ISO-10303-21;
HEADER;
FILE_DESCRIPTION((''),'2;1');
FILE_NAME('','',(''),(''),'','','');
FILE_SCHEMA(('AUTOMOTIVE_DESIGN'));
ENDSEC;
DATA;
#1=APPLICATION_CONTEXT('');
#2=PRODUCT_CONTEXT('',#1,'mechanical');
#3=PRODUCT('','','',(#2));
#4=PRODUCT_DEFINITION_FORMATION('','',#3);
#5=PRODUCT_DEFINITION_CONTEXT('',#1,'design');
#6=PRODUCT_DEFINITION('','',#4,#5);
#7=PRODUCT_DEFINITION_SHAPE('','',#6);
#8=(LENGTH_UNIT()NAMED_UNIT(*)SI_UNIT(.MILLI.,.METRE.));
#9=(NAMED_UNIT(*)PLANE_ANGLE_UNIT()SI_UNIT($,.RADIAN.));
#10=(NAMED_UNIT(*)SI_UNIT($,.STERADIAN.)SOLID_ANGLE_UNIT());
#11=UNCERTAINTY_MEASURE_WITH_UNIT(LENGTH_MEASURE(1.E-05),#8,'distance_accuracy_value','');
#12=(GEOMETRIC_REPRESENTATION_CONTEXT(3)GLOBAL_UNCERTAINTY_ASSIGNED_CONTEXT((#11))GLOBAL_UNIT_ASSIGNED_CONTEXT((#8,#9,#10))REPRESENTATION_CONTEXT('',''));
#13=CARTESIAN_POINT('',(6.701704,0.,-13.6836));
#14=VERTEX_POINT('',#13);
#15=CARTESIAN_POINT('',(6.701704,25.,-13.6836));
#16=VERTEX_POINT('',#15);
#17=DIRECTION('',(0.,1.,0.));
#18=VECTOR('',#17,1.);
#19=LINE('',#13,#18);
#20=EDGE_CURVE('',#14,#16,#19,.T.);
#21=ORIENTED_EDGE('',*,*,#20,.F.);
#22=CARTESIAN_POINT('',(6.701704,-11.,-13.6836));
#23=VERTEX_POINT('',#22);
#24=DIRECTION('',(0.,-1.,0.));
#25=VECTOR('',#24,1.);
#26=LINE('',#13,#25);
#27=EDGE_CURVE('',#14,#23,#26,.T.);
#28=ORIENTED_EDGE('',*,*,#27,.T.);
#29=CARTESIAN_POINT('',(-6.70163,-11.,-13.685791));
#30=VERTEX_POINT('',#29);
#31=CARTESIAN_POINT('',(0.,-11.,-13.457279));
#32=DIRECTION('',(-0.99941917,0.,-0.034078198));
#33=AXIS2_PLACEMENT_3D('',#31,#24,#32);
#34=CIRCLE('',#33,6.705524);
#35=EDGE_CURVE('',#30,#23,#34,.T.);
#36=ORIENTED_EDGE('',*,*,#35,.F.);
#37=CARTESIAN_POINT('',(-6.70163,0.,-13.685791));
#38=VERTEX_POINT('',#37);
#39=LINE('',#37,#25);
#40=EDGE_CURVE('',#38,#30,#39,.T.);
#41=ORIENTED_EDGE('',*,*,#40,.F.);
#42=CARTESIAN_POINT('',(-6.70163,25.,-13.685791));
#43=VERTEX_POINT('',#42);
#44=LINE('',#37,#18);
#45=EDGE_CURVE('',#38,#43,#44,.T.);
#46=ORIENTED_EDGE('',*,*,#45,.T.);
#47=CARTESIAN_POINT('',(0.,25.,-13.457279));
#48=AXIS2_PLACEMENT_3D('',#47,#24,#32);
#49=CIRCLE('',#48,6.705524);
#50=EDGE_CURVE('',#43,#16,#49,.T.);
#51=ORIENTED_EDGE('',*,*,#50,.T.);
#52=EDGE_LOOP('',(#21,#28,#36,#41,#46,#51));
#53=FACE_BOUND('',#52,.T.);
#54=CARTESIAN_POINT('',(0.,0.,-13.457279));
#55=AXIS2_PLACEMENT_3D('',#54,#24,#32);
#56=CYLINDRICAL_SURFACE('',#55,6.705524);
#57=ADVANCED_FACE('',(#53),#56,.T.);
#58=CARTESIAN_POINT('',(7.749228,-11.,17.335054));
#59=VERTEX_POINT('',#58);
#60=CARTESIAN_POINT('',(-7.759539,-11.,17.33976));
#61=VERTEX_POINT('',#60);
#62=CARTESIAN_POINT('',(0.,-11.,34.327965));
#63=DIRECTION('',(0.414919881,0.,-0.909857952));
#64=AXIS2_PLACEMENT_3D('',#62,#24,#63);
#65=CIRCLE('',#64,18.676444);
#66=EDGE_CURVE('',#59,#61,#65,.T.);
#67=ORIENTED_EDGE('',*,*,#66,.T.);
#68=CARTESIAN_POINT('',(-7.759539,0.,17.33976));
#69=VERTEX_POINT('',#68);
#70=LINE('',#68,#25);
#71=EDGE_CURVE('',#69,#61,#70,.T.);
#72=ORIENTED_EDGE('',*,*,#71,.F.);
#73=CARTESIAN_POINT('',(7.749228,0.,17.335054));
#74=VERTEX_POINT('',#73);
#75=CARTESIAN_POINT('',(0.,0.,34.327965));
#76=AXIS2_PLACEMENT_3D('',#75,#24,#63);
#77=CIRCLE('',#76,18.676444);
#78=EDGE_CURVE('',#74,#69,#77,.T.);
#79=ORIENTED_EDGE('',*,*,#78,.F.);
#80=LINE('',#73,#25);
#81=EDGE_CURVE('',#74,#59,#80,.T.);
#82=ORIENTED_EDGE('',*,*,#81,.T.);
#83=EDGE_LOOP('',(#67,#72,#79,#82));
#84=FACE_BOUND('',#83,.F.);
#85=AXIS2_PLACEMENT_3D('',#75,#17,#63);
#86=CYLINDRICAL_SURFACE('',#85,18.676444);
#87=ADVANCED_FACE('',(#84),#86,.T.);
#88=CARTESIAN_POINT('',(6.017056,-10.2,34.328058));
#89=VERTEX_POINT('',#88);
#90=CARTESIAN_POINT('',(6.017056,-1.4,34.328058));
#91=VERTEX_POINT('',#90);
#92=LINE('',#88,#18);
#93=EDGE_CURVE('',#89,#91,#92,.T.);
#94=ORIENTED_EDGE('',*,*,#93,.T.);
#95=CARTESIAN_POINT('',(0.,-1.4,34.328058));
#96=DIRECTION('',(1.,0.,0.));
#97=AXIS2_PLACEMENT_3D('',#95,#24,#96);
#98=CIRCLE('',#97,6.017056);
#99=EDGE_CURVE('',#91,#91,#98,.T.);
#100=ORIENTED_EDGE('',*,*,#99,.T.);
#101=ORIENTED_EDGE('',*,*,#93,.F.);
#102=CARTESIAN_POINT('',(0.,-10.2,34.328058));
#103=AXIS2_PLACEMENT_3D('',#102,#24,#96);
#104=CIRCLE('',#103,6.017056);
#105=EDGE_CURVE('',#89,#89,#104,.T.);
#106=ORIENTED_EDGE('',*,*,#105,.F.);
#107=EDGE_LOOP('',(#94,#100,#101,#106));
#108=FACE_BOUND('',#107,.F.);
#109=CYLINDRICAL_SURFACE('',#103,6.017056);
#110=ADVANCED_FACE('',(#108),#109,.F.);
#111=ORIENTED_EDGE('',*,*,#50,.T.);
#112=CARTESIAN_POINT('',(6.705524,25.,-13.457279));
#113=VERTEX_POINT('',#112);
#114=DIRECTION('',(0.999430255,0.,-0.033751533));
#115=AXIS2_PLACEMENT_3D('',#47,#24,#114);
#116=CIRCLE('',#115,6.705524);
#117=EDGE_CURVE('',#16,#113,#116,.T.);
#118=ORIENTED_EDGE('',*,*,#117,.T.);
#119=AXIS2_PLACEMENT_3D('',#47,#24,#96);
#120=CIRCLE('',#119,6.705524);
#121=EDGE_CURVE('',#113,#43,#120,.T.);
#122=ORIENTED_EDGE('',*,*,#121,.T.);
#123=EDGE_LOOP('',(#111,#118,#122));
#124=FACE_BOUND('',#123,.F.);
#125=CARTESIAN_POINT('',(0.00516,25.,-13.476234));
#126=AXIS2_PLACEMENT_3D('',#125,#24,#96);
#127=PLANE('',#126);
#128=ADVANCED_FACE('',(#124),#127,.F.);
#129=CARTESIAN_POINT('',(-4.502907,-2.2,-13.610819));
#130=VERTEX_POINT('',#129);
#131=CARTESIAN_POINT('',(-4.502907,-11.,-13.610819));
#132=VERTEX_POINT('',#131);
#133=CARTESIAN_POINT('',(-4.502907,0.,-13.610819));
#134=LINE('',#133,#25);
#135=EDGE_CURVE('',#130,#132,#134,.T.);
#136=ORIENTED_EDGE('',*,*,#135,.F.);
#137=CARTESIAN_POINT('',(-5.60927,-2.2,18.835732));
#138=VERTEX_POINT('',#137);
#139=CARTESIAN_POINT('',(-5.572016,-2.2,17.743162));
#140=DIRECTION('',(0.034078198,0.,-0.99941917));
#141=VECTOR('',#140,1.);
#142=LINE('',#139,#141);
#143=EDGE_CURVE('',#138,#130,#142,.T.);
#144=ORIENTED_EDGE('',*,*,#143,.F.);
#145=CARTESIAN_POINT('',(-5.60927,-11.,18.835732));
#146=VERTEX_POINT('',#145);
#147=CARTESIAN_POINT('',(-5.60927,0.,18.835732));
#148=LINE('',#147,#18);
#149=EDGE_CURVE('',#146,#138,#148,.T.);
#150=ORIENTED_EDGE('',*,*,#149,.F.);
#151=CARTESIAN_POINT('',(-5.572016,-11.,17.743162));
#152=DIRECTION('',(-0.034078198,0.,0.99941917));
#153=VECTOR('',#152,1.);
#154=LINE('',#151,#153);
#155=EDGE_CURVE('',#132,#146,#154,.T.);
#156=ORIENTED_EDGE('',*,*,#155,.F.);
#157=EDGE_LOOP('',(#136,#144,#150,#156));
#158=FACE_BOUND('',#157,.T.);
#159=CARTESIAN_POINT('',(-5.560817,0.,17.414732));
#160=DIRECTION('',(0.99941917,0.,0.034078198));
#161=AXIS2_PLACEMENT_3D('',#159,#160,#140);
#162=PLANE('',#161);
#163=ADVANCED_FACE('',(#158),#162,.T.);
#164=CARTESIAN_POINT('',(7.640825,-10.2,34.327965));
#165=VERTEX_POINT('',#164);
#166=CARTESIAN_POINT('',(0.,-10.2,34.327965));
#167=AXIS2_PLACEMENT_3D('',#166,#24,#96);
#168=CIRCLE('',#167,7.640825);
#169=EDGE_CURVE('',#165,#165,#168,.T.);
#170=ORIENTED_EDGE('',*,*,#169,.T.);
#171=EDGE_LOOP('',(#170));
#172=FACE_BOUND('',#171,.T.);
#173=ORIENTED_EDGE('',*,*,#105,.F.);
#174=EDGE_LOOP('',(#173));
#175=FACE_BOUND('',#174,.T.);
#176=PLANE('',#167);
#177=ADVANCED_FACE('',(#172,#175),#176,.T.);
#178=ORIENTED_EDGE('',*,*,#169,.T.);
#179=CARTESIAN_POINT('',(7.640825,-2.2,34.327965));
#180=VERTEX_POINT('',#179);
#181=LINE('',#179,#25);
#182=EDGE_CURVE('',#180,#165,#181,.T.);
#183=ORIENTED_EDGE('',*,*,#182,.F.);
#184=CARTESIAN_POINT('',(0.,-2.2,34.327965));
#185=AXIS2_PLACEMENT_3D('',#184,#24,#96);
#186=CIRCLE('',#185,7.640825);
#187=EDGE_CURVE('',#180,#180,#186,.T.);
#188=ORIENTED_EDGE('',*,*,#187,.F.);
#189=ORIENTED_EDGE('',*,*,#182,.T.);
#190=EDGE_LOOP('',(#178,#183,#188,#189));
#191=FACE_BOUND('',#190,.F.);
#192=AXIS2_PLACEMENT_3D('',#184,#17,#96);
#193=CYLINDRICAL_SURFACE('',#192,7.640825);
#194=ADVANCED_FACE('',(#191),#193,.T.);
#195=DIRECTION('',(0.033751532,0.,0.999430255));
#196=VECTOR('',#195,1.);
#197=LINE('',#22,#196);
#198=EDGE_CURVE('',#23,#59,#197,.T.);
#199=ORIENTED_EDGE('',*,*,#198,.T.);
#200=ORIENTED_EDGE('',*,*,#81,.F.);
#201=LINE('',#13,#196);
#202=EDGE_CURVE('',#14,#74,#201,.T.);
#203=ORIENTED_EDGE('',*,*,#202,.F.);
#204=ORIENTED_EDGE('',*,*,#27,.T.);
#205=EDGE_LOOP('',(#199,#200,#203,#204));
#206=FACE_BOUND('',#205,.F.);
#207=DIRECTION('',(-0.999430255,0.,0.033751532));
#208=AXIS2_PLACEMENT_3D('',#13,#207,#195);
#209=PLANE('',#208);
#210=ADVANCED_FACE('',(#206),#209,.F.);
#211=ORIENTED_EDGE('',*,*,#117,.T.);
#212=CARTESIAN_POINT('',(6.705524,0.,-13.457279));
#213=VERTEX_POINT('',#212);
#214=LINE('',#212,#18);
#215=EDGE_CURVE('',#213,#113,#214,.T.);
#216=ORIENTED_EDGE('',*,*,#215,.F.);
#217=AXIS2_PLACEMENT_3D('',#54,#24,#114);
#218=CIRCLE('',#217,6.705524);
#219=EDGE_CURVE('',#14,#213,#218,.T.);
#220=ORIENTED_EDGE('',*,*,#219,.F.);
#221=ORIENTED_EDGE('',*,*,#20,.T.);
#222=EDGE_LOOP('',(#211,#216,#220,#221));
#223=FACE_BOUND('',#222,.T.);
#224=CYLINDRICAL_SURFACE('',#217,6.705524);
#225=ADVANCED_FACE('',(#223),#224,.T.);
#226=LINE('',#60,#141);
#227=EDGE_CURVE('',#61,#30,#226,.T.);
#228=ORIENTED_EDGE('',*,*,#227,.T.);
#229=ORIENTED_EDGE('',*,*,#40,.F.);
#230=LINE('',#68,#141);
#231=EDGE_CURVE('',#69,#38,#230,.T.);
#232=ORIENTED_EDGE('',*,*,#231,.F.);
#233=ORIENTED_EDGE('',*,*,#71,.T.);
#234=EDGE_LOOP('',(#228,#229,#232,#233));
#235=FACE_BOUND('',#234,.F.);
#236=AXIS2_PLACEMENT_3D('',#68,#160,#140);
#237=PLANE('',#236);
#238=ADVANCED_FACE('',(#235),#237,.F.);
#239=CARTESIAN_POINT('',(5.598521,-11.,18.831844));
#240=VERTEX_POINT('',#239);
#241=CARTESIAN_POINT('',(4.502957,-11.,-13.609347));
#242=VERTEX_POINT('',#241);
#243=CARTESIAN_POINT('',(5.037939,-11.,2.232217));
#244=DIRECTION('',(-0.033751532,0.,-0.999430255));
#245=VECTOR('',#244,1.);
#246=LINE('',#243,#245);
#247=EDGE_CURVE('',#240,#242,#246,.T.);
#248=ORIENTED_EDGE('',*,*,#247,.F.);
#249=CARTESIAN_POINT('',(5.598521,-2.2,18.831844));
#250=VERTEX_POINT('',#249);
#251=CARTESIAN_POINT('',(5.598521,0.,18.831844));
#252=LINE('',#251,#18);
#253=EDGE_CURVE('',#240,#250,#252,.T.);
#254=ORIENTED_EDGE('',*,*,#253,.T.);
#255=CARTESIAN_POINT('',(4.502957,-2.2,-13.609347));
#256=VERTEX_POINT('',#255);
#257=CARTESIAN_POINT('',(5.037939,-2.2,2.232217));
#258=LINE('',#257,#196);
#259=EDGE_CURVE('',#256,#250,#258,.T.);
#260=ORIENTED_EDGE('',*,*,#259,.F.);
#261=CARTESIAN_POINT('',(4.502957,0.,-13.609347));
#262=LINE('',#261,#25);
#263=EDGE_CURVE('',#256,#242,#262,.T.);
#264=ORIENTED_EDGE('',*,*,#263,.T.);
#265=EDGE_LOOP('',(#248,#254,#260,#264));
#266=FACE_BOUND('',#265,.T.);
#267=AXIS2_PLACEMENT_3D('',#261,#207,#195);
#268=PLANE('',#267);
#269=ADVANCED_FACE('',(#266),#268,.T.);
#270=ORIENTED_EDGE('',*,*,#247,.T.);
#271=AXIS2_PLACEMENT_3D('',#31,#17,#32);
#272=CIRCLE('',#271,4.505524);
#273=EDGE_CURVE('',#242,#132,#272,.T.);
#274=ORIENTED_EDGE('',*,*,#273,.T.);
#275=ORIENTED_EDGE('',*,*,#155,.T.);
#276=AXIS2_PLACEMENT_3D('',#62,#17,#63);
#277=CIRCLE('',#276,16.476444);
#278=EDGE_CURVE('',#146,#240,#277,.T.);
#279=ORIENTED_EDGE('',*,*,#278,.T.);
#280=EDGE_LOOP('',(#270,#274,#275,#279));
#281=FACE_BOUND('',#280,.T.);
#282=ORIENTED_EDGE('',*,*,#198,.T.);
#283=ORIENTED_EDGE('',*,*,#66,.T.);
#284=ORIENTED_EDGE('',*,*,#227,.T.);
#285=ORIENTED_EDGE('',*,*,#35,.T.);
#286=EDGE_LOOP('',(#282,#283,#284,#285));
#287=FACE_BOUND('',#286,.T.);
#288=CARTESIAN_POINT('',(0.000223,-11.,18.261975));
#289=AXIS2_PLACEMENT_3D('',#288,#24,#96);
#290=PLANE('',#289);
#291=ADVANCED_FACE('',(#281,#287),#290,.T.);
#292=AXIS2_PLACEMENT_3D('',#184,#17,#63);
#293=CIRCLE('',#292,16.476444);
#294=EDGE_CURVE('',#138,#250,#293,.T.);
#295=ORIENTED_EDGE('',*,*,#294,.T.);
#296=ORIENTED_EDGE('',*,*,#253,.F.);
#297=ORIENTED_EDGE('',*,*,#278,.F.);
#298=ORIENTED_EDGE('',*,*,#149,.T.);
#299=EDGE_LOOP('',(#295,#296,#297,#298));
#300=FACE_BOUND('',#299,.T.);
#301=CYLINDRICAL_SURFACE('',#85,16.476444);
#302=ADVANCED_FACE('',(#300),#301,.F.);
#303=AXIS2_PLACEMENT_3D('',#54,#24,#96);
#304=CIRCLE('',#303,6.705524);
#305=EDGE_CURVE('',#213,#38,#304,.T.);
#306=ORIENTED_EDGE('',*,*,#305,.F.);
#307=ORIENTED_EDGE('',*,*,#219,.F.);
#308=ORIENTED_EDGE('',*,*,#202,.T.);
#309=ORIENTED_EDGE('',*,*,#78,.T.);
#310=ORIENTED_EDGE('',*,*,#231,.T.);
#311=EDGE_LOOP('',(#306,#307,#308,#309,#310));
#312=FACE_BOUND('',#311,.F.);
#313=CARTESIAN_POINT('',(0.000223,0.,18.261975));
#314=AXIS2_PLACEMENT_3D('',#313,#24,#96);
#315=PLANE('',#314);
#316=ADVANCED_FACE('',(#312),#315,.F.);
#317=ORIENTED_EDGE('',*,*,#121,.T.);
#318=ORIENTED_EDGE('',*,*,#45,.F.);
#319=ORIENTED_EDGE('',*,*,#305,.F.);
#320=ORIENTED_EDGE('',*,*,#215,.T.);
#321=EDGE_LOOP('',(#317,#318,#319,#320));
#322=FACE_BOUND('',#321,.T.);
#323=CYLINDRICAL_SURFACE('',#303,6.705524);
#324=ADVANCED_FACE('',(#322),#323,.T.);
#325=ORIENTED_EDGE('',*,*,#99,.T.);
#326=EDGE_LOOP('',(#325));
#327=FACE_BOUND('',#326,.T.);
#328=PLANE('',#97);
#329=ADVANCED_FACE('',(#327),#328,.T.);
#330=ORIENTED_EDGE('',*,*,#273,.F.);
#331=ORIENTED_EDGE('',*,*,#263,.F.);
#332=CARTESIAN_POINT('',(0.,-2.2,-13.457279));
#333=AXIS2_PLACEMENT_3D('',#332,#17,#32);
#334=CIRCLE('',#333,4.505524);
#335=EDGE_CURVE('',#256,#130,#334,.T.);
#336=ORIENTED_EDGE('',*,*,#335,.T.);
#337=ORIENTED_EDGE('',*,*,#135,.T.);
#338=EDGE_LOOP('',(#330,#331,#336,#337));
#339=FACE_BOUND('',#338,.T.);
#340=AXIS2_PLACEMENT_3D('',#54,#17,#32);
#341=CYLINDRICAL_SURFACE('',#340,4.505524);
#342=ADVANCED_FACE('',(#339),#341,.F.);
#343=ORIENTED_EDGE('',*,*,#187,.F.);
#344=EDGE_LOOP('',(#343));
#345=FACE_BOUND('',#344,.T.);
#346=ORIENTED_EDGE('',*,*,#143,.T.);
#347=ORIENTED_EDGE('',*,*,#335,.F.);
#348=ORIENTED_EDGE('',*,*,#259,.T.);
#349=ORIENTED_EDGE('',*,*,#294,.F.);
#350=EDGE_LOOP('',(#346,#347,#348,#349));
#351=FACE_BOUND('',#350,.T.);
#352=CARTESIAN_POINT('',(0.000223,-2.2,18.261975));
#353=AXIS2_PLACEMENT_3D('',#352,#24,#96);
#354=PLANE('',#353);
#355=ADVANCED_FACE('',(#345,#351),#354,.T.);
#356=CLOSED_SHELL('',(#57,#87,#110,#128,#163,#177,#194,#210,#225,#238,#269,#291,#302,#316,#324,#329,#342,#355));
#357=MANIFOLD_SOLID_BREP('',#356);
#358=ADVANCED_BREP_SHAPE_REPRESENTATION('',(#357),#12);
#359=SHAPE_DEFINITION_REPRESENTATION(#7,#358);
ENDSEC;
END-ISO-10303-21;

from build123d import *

# Parameters (mm, degrees)
F0_R     = 5.0192291216
F1_DEPTH = 11
F2_T     = -2.2
F3_R     = 7.6408252188
F4_DEPTH = 8
F5_R     = 6.0170563026
F6_DEPTH = 8.8
F7_DEPTH = 25


# Not quite as in the source:
# - a feature names something its author has since deleted; it is built from what else it names


with BuildPart() as f1:
    # F0 (on Front) → F1 (new body)
    with BuildSketch(Plane.XZ):
        with BuildLine():
            Line((6.7017039213, -13.6836004417), (7.7492278625, 17.3350542571))
            ThreePointArc((7.7492278625, 17.3350542571), (0.0056670875, 53.0044082442), (-7.7595389242, 17.3397601606))
            Line((-7.7595389242, 17.3397601606), (-6.7016295892, -13.6857909072))
            ThreePointArc((-6.7016295892, -13.6857909072), (-0.1142726876, -6.7527281229), (6.7055243621, -13.457278721))
            ThreePointArc((6.7055243621, -13.457278721), (6.7045691839, -13.570455703), (6.7017039213, -13.6836004417))
        make_face()
        with Locations((0, 34.3279652297)):
            Circle(F0_R, mode=Mode.SUBTRACT)
        with BuildLine():
            ThreePointArc((8.3308181793, 34.5567601339), (8.3292111279, 34.0466813329), (8.2964022532, 33.5376562417))
            Line((8.2964022532, 33.5376562417), (8.3308181793, 34.5567601339))
        make_face(mode=Mode.SUBTRACT)
        with BuildLine():
            ThreePointArc((-6.7016295892, -13.6857909072), (0.0010958632, -20.1628029936), (6.7017039213, -13.6836004417))
            ThreePointArc((6.7017039213, -13.6836004417), (6.7045691839, -13.570455703), (6.7055243621, -13.457278721))
            ThreePointArc((6.7055243621, -13.457278721), (-0.1142726876, -6.7527281229), (-6.7016295892, -13.6857909072))
        make_face()
        with BuildLine():
            Line((8.3308181793, 34.5567601339), (8.2964022532, 33.5376562417))
            ThreePointArc((8.2964022532, 33.5376562417), (8.3292111279, 34.0466813329), (8.3308181793, 34.5567601339))
        make_face()
        with Locations((0, 34.3279652297)):
            Circle(F0_R)
    extrude(amount=F1_DEPTH)

    # F2
    f2_openings = [f1.faces().sort_by_distance(p)[0] for p in [
        (-0.000731, -11, 23.334865),
    ]]
    offset(amount=F2_T, openings=f2_openings, kind=Kind.INTERSECTION)

    # F3 (on face) → F4 (join)
    with BuildSketch(Plane.XZ.offset(2.2)):
        with Locations((0, 34.3279652297)):
            Circle(F3_R)
    extrude(amount=F4_DEPTH)

    # F5 (on face) → F6 (cut)
    with BuildSketch(Plane.XZ.offset(10.2)):
        with Locations((0, 34.328058362)):
            Circle(F5_R)
    extrude(amount=-F6_DEPTH, mode=Mode.SUBTRACT)

    # F0 (on Front) → F7 (join)
    with BuildSketch(Plane.XZ):
        with BuildLine():
            ThreePointArc((-6.7016295892, -13.6857909072), (0.0010958632, -20.1628029936), (6.7017039213, -13.6836004417))
            ThreePointArc((6.7017039213, -13.6836004417), (6.7045691839, -13.570455703), (6.7055243621, -13.457278721))
            ThreePointArc((6.7055243621, -13.457278721), (-0.1142726876, -6.7527281229), (-6.7016295892, -13.6857909072))
        make_face()
    extrude(amount=-F7_DEPTH)


solid = f1.part
